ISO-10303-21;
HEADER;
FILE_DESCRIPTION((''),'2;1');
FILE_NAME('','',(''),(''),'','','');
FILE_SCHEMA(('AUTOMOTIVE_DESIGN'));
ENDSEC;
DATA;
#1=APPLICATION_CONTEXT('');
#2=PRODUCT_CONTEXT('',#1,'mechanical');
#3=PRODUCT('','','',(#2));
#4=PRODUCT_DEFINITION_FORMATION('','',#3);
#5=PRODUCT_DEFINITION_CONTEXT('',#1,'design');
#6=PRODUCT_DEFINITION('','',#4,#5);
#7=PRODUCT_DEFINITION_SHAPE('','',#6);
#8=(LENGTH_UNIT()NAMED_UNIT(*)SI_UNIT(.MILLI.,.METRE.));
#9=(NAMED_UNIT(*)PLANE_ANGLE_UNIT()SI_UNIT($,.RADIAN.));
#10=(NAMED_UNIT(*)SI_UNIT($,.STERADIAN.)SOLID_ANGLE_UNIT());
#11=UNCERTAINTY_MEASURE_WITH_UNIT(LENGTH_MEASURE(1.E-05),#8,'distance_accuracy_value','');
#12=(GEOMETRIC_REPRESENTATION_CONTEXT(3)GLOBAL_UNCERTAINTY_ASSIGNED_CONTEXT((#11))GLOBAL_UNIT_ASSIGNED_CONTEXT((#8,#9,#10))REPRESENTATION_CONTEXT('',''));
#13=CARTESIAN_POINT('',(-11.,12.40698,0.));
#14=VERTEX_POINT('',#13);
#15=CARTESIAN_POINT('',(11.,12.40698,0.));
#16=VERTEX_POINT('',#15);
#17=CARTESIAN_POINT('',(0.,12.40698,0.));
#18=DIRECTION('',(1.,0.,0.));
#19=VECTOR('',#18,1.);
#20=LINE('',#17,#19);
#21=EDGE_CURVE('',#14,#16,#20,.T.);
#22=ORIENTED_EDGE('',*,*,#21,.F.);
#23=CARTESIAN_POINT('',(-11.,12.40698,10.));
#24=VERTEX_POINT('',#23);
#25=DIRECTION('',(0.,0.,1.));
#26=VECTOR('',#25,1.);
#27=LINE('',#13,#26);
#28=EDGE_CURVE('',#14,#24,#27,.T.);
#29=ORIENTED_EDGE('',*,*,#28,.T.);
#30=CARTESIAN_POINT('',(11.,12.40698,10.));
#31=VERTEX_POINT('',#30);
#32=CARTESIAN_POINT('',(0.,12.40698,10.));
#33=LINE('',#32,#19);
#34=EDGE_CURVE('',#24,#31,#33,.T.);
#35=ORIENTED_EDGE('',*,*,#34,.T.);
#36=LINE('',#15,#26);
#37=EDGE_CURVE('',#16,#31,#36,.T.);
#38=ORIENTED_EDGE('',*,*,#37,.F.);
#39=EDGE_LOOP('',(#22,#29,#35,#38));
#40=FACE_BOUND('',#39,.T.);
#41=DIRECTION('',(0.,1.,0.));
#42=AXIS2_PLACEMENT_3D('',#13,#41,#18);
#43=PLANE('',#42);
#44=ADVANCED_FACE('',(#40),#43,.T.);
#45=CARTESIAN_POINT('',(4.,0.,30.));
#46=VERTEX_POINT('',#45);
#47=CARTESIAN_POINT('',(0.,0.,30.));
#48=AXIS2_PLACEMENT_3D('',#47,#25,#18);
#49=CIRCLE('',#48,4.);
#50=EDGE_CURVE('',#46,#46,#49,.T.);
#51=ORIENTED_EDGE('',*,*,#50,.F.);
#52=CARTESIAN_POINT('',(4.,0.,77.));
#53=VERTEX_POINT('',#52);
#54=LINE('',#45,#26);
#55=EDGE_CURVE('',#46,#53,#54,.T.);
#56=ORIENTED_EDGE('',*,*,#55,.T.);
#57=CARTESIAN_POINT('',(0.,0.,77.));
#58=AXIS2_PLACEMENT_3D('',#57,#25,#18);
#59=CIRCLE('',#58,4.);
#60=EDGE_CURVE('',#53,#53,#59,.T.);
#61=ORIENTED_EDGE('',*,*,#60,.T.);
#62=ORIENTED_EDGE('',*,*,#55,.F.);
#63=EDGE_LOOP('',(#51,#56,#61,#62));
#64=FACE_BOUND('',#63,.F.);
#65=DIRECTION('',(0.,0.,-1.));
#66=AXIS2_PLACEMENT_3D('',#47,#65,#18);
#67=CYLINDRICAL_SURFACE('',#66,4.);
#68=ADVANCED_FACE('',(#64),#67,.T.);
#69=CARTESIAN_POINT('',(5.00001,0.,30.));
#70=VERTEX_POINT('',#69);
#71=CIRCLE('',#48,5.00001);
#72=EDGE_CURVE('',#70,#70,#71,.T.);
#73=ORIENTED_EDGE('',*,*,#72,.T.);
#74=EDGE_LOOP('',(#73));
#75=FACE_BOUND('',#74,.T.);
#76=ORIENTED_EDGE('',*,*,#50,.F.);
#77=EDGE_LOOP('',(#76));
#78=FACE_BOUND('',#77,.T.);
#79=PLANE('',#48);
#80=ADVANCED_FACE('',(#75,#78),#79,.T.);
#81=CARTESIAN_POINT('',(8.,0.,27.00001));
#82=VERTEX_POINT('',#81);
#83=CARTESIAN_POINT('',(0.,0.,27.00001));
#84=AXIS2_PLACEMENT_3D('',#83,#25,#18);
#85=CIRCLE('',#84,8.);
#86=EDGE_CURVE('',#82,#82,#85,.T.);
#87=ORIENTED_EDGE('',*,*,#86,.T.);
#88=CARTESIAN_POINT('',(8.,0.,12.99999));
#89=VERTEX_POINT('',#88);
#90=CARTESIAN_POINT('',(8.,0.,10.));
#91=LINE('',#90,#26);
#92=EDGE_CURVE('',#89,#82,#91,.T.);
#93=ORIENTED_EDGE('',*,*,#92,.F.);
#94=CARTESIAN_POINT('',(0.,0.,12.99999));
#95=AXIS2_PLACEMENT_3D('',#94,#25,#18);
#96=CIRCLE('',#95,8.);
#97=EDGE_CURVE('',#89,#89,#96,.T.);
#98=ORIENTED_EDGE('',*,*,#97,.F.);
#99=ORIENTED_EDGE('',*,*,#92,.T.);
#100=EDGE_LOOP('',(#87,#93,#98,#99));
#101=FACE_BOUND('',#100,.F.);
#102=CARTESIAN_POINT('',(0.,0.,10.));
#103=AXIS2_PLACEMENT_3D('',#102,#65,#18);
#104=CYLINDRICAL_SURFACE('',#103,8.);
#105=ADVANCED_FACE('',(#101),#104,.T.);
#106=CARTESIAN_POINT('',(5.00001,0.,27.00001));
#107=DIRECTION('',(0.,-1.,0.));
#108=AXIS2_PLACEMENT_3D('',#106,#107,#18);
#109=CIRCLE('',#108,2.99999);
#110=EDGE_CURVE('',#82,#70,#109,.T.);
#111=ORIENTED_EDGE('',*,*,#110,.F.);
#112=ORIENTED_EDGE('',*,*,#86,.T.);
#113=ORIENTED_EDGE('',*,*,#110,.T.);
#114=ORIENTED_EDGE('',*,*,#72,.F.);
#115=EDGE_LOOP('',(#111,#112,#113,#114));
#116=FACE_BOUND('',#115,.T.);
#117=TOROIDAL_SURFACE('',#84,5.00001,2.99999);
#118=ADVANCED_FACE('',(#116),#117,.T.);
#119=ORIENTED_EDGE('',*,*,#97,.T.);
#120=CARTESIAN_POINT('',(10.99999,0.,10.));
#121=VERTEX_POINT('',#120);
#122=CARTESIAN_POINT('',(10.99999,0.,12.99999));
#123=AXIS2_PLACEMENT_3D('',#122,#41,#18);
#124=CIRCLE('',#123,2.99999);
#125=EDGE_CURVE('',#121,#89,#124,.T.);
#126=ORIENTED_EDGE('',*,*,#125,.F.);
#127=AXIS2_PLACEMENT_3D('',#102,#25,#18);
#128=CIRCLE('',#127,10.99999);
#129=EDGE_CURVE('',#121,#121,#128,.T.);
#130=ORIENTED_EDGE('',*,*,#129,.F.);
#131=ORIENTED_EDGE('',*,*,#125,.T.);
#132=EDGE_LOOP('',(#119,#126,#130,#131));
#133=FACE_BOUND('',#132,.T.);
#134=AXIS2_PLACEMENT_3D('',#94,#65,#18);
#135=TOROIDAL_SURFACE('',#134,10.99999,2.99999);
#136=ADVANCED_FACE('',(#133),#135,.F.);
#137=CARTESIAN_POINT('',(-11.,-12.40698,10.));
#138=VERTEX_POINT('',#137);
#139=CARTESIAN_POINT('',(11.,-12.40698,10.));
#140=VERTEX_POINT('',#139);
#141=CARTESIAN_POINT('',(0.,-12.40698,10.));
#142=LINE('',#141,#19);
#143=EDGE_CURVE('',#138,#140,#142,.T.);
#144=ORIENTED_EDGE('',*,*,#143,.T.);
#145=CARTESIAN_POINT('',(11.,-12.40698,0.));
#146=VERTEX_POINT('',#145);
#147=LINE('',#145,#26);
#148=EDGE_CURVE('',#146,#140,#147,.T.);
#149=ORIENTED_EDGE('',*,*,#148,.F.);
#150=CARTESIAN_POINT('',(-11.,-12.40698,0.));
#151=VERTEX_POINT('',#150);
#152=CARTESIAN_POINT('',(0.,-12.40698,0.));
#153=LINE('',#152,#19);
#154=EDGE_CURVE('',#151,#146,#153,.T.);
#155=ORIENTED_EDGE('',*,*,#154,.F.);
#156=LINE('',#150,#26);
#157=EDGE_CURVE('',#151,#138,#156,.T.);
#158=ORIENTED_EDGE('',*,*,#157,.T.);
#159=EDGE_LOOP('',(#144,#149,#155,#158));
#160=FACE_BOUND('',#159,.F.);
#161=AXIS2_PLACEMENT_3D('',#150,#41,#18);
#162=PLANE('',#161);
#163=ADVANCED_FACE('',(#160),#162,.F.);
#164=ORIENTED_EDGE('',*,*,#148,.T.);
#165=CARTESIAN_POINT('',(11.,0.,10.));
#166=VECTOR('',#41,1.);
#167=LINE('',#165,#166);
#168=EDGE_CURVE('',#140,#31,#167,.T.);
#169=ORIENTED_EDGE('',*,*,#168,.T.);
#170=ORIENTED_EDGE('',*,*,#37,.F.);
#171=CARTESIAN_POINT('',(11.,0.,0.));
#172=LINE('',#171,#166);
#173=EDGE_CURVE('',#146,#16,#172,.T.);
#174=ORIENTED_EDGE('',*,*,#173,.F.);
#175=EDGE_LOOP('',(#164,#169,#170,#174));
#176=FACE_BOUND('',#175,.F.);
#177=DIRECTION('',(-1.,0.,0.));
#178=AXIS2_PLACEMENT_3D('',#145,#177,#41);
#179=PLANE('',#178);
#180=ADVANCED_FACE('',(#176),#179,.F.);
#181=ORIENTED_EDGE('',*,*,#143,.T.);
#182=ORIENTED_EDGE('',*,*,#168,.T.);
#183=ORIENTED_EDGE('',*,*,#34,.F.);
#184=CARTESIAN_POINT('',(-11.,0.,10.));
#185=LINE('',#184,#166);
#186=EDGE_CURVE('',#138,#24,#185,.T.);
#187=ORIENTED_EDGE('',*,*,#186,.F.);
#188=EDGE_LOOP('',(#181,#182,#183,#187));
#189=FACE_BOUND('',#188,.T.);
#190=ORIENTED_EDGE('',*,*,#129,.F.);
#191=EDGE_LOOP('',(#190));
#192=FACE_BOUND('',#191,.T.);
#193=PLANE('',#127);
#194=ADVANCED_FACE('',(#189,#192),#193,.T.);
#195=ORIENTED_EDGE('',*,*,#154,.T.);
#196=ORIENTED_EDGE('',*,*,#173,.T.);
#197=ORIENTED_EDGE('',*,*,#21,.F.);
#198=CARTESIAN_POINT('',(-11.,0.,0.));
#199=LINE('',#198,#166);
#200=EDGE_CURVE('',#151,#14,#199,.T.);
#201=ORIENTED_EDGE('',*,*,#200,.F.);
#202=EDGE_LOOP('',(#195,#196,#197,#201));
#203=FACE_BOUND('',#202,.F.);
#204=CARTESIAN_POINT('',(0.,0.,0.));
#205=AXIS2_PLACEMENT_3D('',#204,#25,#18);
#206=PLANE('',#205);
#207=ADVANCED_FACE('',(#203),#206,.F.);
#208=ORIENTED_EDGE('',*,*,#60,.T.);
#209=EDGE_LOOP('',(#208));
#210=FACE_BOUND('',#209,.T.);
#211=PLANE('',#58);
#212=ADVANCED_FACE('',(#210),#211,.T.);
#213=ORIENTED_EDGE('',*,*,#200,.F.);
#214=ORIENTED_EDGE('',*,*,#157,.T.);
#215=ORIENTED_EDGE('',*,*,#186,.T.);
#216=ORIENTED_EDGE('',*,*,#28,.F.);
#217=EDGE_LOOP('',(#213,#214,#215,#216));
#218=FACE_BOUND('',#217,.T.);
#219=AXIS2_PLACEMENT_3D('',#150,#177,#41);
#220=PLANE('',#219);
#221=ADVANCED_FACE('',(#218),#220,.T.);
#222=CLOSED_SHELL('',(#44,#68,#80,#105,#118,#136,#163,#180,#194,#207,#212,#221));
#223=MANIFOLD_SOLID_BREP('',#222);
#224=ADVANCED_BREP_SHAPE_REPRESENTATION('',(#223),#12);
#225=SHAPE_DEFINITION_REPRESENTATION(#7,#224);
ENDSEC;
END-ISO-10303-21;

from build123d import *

# Parameters (mm, degrees)
F0_W     = 22
F0_H     = 24.8139590786
F1_DEPTH = 10
F2_R     = 8
F3_DEPTH = 20
F4_R     = 4
F5_DEPTH = 47
F6_R     = 2.99999


# Not quite as in the source:
# - a fillet or chamfer is up to 0.001 mm smaller than in the source, because OpenCascade refuses the exact size


with BuildPart() as f1:
    # F0 (on Top) → F1 (new body)
    with BuildSketch(Plane.XY):
        Rectangle(F0_W, F0_H)
    extrude(amount=F1_DEPTH)

    # F2 (on face) → F3 (join)
    with BuildSketch(Plane.XY.offset(10)):
        Circle(F2_R)
    extrude(amount=F3_DEPTH)

    # F4 (on face) → F5 (join)
    with BuildSketch(Plane.XY.offset(30)):
        Circle(F4_R)
    extrude(amount=F5_DEPTH)

    # F6 (radius 3 in the source; OpenCascade refuses exactly that, so slightly less here)
    f6_edges = [f1.edges().sort_by_distance(p)[0] for p in [
        (8, 0, 20),
        (-8, 0, 10),
        (-8, 0, 30),
    ]]
    fillet(f6_edges, radius=F6_R)


solid = f1.part
